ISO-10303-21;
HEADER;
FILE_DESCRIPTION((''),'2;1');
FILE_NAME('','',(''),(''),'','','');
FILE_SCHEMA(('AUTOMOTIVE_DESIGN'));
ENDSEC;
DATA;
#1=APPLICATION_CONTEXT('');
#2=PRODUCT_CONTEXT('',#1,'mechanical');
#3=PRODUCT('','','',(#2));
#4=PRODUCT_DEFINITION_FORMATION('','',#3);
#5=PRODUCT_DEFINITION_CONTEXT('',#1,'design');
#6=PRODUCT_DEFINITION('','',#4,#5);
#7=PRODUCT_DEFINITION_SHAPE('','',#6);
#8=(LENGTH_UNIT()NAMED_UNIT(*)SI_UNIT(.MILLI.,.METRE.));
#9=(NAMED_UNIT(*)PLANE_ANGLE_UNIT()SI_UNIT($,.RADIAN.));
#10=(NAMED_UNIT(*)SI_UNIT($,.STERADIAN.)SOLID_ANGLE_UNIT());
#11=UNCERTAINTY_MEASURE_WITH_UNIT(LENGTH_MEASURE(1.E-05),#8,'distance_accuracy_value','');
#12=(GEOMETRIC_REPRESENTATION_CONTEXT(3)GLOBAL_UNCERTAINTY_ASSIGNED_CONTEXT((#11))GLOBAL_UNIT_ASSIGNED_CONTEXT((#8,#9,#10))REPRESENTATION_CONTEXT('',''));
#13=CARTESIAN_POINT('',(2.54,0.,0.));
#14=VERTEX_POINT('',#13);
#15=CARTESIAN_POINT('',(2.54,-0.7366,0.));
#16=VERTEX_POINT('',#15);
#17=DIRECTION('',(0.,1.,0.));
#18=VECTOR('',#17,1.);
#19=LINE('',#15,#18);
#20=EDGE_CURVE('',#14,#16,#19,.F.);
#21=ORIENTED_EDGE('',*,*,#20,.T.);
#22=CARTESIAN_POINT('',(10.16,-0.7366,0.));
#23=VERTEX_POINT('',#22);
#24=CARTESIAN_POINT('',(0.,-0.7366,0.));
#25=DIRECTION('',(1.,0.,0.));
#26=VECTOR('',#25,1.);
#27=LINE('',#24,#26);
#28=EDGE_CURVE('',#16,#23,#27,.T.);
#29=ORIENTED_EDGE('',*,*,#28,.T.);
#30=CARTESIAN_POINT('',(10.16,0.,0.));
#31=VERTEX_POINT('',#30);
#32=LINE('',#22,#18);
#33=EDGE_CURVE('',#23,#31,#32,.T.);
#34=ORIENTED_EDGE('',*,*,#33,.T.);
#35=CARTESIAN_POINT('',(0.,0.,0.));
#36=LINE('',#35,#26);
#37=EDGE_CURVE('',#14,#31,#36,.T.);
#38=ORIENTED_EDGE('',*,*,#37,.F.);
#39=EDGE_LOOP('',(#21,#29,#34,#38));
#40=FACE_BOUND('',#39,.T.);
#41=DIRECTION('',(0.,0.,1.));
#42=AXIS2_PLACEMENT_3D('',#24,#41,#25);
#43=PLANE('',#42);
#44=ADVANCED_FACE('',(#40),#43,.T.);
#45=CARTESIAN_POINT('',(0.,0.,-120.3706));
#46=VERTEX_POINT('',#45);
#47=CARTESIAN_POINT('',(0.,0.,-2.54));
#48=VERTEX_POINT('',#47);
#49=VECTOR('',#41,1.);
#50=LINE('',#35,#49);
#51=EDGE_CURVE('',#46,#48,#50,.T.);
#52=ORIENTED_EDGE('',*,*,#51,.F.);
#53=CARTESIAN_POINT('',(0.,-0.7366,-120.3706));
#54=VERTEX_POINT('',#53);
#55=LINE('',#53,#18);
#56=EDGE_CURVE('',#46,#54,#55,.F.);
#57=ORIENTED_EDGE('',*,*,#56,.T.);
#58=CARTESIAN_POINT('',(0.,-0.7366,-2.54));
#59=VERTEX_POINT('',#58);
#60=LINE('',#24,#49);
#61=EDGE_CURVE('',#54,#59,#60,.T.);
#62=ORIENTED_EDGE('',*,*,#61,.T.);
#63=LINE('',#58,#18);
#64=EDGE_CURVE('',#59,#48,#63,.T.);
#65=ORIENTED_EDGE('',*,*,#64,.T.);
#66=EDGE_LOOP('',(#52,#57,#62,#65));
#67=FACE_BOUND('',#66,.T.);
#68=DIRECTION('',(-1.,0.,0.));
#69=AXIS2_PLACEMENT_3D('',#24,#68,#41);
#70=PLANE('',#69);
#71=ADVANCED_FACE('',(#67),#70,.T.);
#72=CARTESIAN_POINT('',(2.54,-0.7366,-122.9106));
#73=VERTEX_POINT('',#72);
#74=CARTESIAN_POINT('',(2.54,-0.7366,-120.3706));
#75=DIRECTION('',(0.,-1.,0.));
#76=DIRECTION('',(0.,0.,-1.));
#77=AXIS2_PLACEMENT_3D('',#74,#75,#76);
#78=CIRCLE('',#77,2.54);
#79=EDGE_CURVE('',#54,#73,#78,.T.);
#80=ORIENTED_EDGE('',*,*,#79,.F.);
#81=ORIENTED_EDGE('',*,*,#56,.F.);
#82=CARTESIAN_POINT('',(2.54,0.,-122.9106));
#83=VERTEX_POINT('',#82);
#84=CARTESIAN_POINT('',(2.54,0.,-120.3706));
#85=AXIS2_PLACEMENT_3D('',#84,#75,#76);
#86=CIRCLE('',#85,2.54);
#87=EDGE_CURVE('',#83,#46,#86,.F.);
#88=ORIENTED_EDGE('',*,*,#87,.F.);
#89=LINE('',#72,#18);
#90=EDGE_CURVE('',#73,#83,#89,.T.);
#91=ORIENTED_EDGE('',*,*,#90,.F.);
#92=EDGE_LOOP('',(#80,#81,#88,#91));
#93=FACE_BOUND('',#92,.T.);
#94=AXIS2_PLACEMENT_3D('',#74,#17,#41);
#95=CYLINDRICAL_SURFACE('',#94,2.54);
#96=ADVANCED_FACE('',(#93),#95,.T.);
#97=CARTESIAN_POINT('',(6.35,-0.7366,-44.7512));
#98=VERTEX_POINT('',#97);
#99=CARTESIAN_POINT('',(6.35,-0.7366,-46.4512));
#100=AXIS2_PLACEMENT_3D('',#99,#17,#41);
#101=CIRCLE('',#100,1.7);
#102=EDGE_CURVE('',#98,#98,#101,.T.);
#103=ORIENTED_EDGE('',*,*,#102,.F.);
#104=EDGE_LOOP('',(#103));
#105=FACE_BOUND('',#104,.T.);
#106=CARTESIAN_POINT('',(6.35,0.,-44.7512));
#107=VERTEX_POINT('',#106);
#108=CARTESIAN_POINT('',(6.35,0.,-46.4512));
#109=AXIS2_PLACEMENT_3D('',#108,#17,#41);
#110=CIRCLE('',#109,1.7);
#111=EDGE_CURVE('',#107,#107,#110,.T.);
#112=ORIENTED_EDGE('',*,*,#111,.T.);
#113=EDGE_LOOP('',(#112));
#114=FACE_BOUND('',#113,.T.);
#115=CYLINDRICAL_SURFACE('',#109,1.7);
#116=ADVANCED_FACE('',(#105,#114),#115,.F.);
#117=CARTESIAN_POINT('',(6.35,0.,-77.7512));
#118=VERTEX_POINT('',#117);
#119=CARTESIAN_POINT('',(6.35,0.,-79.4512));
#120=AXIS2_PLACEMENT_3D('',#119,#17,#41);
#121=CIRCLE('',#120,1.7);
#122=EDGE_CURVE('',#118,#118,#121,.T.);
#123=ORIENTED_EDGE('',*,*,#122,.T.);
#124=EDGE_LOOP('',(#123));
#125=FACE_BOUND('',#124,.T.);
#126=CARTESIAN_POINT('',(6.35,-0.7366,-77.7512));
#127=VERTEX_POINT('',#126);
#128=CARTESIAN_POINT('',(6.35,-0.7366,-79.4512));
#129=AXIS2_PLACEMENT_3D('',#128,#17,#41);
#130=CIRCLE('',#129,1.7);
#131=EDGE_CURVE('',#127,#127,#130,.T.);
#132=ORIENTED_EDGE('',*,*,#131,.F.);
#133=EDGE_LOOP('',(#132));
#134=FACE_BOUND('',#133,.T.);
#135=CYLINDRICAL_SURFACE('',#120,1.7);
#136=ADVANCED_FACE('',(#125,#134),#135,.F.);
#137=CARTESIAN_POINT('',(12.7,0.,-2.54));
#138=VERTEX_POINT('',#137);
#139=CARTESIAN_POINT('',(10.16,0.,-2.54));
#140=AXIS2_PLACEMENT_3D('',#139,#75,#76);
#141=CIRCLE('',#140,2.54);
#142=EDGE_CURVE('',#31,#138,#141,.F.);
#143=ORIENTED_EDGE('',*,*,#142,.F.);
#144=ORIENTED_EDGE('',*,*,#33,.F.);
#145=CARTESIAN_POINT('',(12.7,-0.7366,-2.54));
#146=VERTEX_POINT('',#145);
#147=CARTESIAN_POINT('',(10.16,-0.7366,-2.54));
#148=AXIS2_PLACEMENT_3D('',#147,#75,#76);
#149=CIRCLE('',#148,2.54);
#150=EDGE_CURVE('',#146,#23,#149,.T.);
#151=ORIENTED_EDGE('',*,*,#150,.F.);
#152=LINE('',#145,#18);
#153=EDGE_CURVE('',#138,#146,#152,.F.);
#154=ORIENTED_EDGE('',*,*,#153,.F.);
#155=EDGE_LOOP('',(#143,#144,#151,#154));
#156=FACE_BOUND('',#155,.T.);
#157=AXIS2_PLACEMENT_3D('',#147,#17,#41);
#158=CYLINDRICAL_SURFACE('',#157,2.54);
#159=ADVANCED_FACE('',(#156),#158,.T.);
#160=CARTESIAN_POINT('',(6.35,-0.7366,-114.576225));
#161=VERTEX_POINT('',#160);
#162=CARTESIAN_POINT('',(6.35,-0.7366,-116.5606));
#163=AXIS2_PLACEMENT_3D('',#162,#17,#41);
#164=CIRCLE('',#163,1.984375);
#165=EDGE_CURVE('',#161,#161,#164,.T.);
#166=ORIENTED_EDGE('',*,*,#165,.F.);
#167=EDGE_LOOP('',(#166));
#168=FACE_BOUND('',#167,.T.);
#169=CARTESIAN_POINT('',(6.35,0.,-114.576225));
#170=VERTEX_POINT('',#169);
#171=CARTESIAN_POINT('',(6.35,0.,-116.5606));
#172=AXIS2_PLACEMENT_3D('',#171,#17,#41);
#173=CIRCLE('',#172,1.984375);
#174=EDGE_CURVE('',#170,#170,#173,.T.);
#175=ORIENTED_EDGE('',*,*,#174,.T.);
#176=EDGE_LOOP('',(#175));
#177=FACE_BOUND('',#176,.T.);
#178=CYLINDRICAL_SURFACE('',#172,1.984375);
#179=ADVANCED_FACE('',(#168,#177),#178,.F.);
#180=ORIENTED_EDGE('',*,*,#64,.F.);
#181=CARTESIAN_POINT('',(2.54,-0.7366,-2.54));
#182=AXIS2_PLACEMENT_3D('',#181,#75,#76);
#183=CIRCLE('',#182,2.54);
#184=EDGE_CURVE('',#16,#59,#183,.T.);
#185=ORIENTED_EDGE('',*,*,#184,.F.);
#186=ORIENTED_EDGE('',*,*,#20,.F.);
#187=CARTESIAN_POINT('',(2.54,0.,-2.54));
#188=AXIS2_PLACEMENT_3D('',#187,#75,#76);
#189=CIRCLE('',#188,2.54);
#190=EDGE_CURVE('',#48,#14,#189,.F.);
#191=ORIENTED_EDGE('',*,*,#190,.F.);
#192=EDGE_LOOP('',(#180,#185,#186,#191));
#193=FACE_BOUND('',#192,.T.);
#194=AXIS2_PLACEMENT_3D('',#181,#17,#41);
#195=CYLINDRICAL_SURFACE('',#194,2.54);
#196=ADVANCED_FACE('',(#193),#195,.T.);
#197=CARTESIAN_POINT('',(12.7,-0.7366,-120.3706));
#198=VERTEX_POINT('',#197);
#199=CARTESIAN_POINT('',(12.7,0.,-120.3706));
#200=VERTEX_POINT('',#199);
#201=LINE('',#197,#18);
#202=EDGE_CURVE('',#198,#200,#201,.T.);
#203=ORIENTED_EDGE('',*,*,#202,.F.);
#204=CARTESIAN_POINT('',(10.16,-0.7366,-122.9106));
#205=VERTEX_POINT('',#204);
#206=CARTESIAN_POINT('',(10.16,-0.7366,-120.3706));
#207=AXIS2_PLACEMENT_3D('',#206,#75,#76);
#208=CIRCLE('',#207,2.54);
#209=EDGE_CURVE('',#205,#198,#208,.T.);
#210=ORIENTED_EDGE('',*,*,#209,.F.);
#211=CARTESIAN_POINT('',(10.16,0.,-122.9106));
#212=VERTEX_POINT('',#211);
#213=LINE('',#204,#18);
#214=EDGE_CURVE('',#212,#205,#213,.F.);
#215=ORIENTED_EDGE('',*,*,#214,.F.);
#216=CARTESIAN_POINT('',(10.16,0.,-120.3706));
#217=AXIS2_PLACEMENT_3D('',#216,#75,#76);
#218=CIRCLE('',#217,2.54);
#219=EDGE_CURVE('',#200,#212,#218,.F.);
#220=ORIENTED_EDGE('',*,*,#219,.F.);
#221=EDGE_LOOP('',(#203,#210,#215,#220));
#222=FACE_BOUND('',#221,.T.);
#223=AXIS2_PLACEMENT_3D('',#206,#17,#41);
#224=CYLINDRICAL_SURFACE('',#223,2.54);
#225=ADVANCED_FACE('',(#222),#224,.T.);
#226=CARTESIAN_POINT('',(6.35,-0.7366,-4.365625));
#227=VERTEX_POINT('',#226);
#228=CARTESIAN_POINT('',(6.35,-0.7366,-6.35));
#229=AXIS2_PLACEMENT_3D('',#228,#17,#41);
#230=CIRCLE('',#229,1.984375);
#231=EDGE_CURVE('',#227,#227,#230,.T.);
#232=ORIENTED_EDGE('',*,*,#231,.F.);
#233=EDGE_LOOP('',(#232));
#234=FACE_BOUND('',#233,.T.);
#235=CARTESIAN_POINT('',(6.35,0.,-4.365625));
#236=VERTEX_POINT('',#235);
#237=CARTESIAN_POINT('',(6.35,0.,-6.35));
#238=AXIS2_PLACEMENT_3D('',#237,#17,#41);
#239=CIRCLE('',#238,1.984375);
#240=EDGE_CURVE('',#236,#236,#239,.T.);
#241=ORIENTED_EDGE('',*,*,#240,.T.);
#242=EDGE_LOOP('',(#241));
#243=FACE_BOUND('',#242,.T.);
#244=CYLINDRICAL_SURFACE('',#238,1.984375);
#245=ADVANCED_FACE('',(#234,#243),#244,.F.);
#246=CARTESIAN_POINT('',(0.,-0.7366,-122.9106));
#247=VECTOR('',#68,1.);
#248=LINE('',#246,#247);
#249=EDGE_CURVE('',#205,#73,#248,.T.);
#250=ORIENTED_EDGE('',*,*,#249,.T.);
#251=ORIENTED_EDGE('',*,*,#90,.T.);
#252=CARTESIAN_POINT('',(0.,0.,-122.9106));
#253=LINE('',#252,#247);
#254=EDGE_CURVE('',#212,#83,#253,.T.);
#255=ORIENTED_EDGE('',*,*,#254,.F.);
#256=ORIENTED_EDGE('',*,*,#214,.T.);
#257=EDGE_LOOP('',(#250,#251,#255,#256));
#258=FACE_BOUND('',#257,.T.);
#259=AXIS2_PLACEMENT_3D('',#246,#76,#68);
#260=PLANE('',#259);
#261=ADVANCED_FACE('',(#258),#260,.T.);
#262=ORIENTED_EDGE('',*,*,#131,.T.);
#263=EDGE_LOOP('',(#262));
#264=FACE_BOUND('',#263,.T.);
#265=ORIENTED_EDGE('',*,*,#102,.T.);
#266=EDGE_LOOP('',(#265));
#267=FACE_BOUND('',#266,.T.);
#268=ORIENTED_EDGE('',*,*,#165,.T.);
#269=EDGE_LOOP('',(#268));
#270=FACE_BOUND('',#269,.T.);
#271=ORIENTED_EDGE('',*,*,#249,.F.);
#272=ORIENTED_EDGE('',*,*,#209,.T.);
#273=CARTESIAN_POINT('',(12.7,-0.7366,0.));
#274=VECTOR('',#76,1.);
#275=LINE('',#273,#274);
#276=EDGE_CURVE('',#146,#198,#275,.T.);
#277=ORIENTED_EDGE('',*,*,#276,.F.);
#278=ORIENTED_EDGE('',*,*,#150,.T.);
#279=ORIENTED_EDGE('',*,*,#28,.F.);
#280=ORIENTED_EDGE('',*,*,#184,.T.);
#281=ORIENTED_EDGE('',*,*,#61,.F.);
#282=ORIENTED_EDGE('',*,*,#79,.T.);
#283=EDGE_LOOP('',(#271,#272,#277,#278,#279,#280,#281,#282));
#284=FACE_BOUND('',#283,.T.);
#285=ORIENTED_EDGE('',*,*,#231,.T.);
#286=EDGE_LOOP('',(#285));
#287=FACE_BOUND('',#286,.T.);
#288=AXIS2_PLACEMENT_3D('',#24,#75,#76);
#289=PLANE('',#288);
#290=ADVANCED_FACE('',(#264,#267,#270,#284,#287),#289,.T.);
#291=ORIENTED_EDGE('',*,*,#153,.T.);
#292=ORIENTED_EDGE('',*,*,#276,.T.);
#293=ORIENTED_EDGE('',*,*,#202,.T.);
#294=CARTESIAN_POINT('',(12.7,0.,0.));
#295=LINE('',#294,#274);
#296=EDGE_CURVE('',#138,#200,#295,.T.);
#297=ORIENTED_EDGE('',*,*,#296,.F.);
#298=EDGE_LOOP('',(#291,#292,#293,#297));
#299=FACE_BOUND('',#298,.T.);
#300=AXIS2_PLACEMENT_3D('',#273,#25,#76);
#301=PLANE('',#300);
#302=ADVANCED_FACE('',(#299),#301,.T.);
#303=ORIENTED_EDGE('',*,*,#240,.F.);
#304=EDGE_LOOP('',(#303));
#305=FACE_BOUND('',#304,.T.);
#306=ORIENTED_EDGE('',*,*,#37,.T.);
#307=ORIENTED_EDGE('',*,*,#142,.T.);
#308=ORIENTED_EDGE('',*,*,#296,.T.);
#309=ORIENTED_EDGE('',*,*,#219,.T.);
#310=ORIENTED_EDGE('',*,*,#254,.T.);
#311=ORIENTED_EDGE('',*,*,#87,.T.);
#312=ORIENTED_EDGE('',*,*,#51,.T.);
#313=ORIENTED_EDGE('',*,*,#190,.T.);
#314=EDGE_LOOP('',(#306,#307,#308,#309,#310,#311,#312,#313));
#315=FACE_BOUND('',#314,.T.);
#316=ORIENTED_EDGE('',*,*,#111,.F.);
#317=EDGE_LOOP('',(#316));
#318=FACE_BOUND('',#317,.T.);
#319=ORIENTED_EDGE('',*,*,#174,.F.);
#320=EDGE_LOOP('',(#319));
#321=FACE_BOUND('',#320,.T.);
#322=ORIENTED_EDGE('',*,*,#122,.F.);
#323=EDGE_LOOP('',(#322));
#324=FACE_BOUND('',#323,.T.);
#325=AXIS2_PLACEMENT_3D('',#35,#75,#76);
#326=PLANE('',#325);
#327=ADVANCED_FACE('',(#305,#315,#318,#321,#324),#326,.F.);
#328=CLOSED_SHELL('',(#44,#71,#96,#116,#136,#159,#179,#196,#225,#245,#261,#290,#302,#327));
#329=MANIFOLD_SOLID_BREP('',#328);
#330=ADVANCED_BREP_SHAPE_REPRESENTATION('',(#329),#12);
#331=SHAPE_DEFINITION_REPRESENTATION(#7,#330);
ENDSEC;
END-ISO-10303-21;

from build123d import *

# Parameters (mm, degrees)
SKETCH1_W                       = 12.7
SKETCH1_H                       = 122.9106
BASE_FLANGE2_DEPTH              = 0.7366
M3_CLEARANCE_HOLE1_D            = 3.4
F_5_32_0_15625_DIAMETER_HOLE1_D = 3.96875
BREAK_CORNER1_START             = -0.7366
BREAK_CORNER1_DEPTH             = 0.7366


# Read off the part's stored shape, not the designer's step: Break-Corner1
# Sheet-metal steps are written as plain solids
with BuildPart() as part:
    # Sketch1 → Base-Flange2 (new body)
    with BuildSketch(Plane(origin=(0, 0, 0), x_dir=(1, 0, 0), z_dir=(0, 1, 0))):
        with Locations((6.35, 61.4553)):
            Rectangle(SKETCH1_W, SKETCH1_H)
    extrude(amount=-BASE_FLANGE2_DEPTH)

    # M3 Clearance Hole1 (through all)
    with Locations(Plane(origin=(0, 0, 0), x_dir=(1, 0, 0), z_dir=(0, 1, 0))):
        with Locations((6.35, 46.4512), (6.35, 79.4512)):
            Hole(M3_CLEARANCE_HOLE1_D / 2)

    # 5/32 (0.15625) Diameter Hole1 (through all)
    with Locations(Plane(origin=(0, 0, 0), x_dir=(1, 0, 0), z_dir=(0, 1, 0))):
        with Locations((6.35, 116.5606), (6.35, 6.35)):
            Hole(F_5_32_0_15625_DIAMETER_HOLE1_D / 2)

    # Break-Corner1 outline → Break-Corner1 (cut)
    with BuildSketch(Plane(origin=(0, 0, 0), x_dir=(1, 0, 0), z_dir=(0, 1, 0)).offset(BREAK_CORNER1_START)):
        with BuildLine():
            ThreePointArc((2.54, 0), (0.743948776, 0.743948776), (0, 2.54))
            Line((0, 2.54), (0, 0))
            Line((0, 0), (2.54, 0))
        make_face()
        with BuildLine():
            Line((0, 122.9106), (0, 120.3706))
            ThreePointArc((0, 120.3706), (0.743948776, 122.166651224), (2.54, 122.9106))
            Line((2.54, 122.9106), (0, 122.9106))
        make_face()
        with BuildLine():
            ThreePointArc((12.7, 2.54), (11.956051224, 0.743948776), (10.16, 0))
            Line((10.16, 0), (12.7, 0))
            Line((12.7, 0), (12.7, 2.54))
        make_face()
        with BuildLine():
            Line((12.7, 122.9106), (10.16, 122.9106))
            ThreePointArc((10.16, 122.9106), (11.956051224, 122.166651224), (12.7, 120.3706))
            Line((12.7, 120.3706), (12.7, 122.9106))
        make_face()
    extrude(amount=BREAK_CORNER1_DEPTH, mode=Mode.SUBTRACT)


solid = part.part
